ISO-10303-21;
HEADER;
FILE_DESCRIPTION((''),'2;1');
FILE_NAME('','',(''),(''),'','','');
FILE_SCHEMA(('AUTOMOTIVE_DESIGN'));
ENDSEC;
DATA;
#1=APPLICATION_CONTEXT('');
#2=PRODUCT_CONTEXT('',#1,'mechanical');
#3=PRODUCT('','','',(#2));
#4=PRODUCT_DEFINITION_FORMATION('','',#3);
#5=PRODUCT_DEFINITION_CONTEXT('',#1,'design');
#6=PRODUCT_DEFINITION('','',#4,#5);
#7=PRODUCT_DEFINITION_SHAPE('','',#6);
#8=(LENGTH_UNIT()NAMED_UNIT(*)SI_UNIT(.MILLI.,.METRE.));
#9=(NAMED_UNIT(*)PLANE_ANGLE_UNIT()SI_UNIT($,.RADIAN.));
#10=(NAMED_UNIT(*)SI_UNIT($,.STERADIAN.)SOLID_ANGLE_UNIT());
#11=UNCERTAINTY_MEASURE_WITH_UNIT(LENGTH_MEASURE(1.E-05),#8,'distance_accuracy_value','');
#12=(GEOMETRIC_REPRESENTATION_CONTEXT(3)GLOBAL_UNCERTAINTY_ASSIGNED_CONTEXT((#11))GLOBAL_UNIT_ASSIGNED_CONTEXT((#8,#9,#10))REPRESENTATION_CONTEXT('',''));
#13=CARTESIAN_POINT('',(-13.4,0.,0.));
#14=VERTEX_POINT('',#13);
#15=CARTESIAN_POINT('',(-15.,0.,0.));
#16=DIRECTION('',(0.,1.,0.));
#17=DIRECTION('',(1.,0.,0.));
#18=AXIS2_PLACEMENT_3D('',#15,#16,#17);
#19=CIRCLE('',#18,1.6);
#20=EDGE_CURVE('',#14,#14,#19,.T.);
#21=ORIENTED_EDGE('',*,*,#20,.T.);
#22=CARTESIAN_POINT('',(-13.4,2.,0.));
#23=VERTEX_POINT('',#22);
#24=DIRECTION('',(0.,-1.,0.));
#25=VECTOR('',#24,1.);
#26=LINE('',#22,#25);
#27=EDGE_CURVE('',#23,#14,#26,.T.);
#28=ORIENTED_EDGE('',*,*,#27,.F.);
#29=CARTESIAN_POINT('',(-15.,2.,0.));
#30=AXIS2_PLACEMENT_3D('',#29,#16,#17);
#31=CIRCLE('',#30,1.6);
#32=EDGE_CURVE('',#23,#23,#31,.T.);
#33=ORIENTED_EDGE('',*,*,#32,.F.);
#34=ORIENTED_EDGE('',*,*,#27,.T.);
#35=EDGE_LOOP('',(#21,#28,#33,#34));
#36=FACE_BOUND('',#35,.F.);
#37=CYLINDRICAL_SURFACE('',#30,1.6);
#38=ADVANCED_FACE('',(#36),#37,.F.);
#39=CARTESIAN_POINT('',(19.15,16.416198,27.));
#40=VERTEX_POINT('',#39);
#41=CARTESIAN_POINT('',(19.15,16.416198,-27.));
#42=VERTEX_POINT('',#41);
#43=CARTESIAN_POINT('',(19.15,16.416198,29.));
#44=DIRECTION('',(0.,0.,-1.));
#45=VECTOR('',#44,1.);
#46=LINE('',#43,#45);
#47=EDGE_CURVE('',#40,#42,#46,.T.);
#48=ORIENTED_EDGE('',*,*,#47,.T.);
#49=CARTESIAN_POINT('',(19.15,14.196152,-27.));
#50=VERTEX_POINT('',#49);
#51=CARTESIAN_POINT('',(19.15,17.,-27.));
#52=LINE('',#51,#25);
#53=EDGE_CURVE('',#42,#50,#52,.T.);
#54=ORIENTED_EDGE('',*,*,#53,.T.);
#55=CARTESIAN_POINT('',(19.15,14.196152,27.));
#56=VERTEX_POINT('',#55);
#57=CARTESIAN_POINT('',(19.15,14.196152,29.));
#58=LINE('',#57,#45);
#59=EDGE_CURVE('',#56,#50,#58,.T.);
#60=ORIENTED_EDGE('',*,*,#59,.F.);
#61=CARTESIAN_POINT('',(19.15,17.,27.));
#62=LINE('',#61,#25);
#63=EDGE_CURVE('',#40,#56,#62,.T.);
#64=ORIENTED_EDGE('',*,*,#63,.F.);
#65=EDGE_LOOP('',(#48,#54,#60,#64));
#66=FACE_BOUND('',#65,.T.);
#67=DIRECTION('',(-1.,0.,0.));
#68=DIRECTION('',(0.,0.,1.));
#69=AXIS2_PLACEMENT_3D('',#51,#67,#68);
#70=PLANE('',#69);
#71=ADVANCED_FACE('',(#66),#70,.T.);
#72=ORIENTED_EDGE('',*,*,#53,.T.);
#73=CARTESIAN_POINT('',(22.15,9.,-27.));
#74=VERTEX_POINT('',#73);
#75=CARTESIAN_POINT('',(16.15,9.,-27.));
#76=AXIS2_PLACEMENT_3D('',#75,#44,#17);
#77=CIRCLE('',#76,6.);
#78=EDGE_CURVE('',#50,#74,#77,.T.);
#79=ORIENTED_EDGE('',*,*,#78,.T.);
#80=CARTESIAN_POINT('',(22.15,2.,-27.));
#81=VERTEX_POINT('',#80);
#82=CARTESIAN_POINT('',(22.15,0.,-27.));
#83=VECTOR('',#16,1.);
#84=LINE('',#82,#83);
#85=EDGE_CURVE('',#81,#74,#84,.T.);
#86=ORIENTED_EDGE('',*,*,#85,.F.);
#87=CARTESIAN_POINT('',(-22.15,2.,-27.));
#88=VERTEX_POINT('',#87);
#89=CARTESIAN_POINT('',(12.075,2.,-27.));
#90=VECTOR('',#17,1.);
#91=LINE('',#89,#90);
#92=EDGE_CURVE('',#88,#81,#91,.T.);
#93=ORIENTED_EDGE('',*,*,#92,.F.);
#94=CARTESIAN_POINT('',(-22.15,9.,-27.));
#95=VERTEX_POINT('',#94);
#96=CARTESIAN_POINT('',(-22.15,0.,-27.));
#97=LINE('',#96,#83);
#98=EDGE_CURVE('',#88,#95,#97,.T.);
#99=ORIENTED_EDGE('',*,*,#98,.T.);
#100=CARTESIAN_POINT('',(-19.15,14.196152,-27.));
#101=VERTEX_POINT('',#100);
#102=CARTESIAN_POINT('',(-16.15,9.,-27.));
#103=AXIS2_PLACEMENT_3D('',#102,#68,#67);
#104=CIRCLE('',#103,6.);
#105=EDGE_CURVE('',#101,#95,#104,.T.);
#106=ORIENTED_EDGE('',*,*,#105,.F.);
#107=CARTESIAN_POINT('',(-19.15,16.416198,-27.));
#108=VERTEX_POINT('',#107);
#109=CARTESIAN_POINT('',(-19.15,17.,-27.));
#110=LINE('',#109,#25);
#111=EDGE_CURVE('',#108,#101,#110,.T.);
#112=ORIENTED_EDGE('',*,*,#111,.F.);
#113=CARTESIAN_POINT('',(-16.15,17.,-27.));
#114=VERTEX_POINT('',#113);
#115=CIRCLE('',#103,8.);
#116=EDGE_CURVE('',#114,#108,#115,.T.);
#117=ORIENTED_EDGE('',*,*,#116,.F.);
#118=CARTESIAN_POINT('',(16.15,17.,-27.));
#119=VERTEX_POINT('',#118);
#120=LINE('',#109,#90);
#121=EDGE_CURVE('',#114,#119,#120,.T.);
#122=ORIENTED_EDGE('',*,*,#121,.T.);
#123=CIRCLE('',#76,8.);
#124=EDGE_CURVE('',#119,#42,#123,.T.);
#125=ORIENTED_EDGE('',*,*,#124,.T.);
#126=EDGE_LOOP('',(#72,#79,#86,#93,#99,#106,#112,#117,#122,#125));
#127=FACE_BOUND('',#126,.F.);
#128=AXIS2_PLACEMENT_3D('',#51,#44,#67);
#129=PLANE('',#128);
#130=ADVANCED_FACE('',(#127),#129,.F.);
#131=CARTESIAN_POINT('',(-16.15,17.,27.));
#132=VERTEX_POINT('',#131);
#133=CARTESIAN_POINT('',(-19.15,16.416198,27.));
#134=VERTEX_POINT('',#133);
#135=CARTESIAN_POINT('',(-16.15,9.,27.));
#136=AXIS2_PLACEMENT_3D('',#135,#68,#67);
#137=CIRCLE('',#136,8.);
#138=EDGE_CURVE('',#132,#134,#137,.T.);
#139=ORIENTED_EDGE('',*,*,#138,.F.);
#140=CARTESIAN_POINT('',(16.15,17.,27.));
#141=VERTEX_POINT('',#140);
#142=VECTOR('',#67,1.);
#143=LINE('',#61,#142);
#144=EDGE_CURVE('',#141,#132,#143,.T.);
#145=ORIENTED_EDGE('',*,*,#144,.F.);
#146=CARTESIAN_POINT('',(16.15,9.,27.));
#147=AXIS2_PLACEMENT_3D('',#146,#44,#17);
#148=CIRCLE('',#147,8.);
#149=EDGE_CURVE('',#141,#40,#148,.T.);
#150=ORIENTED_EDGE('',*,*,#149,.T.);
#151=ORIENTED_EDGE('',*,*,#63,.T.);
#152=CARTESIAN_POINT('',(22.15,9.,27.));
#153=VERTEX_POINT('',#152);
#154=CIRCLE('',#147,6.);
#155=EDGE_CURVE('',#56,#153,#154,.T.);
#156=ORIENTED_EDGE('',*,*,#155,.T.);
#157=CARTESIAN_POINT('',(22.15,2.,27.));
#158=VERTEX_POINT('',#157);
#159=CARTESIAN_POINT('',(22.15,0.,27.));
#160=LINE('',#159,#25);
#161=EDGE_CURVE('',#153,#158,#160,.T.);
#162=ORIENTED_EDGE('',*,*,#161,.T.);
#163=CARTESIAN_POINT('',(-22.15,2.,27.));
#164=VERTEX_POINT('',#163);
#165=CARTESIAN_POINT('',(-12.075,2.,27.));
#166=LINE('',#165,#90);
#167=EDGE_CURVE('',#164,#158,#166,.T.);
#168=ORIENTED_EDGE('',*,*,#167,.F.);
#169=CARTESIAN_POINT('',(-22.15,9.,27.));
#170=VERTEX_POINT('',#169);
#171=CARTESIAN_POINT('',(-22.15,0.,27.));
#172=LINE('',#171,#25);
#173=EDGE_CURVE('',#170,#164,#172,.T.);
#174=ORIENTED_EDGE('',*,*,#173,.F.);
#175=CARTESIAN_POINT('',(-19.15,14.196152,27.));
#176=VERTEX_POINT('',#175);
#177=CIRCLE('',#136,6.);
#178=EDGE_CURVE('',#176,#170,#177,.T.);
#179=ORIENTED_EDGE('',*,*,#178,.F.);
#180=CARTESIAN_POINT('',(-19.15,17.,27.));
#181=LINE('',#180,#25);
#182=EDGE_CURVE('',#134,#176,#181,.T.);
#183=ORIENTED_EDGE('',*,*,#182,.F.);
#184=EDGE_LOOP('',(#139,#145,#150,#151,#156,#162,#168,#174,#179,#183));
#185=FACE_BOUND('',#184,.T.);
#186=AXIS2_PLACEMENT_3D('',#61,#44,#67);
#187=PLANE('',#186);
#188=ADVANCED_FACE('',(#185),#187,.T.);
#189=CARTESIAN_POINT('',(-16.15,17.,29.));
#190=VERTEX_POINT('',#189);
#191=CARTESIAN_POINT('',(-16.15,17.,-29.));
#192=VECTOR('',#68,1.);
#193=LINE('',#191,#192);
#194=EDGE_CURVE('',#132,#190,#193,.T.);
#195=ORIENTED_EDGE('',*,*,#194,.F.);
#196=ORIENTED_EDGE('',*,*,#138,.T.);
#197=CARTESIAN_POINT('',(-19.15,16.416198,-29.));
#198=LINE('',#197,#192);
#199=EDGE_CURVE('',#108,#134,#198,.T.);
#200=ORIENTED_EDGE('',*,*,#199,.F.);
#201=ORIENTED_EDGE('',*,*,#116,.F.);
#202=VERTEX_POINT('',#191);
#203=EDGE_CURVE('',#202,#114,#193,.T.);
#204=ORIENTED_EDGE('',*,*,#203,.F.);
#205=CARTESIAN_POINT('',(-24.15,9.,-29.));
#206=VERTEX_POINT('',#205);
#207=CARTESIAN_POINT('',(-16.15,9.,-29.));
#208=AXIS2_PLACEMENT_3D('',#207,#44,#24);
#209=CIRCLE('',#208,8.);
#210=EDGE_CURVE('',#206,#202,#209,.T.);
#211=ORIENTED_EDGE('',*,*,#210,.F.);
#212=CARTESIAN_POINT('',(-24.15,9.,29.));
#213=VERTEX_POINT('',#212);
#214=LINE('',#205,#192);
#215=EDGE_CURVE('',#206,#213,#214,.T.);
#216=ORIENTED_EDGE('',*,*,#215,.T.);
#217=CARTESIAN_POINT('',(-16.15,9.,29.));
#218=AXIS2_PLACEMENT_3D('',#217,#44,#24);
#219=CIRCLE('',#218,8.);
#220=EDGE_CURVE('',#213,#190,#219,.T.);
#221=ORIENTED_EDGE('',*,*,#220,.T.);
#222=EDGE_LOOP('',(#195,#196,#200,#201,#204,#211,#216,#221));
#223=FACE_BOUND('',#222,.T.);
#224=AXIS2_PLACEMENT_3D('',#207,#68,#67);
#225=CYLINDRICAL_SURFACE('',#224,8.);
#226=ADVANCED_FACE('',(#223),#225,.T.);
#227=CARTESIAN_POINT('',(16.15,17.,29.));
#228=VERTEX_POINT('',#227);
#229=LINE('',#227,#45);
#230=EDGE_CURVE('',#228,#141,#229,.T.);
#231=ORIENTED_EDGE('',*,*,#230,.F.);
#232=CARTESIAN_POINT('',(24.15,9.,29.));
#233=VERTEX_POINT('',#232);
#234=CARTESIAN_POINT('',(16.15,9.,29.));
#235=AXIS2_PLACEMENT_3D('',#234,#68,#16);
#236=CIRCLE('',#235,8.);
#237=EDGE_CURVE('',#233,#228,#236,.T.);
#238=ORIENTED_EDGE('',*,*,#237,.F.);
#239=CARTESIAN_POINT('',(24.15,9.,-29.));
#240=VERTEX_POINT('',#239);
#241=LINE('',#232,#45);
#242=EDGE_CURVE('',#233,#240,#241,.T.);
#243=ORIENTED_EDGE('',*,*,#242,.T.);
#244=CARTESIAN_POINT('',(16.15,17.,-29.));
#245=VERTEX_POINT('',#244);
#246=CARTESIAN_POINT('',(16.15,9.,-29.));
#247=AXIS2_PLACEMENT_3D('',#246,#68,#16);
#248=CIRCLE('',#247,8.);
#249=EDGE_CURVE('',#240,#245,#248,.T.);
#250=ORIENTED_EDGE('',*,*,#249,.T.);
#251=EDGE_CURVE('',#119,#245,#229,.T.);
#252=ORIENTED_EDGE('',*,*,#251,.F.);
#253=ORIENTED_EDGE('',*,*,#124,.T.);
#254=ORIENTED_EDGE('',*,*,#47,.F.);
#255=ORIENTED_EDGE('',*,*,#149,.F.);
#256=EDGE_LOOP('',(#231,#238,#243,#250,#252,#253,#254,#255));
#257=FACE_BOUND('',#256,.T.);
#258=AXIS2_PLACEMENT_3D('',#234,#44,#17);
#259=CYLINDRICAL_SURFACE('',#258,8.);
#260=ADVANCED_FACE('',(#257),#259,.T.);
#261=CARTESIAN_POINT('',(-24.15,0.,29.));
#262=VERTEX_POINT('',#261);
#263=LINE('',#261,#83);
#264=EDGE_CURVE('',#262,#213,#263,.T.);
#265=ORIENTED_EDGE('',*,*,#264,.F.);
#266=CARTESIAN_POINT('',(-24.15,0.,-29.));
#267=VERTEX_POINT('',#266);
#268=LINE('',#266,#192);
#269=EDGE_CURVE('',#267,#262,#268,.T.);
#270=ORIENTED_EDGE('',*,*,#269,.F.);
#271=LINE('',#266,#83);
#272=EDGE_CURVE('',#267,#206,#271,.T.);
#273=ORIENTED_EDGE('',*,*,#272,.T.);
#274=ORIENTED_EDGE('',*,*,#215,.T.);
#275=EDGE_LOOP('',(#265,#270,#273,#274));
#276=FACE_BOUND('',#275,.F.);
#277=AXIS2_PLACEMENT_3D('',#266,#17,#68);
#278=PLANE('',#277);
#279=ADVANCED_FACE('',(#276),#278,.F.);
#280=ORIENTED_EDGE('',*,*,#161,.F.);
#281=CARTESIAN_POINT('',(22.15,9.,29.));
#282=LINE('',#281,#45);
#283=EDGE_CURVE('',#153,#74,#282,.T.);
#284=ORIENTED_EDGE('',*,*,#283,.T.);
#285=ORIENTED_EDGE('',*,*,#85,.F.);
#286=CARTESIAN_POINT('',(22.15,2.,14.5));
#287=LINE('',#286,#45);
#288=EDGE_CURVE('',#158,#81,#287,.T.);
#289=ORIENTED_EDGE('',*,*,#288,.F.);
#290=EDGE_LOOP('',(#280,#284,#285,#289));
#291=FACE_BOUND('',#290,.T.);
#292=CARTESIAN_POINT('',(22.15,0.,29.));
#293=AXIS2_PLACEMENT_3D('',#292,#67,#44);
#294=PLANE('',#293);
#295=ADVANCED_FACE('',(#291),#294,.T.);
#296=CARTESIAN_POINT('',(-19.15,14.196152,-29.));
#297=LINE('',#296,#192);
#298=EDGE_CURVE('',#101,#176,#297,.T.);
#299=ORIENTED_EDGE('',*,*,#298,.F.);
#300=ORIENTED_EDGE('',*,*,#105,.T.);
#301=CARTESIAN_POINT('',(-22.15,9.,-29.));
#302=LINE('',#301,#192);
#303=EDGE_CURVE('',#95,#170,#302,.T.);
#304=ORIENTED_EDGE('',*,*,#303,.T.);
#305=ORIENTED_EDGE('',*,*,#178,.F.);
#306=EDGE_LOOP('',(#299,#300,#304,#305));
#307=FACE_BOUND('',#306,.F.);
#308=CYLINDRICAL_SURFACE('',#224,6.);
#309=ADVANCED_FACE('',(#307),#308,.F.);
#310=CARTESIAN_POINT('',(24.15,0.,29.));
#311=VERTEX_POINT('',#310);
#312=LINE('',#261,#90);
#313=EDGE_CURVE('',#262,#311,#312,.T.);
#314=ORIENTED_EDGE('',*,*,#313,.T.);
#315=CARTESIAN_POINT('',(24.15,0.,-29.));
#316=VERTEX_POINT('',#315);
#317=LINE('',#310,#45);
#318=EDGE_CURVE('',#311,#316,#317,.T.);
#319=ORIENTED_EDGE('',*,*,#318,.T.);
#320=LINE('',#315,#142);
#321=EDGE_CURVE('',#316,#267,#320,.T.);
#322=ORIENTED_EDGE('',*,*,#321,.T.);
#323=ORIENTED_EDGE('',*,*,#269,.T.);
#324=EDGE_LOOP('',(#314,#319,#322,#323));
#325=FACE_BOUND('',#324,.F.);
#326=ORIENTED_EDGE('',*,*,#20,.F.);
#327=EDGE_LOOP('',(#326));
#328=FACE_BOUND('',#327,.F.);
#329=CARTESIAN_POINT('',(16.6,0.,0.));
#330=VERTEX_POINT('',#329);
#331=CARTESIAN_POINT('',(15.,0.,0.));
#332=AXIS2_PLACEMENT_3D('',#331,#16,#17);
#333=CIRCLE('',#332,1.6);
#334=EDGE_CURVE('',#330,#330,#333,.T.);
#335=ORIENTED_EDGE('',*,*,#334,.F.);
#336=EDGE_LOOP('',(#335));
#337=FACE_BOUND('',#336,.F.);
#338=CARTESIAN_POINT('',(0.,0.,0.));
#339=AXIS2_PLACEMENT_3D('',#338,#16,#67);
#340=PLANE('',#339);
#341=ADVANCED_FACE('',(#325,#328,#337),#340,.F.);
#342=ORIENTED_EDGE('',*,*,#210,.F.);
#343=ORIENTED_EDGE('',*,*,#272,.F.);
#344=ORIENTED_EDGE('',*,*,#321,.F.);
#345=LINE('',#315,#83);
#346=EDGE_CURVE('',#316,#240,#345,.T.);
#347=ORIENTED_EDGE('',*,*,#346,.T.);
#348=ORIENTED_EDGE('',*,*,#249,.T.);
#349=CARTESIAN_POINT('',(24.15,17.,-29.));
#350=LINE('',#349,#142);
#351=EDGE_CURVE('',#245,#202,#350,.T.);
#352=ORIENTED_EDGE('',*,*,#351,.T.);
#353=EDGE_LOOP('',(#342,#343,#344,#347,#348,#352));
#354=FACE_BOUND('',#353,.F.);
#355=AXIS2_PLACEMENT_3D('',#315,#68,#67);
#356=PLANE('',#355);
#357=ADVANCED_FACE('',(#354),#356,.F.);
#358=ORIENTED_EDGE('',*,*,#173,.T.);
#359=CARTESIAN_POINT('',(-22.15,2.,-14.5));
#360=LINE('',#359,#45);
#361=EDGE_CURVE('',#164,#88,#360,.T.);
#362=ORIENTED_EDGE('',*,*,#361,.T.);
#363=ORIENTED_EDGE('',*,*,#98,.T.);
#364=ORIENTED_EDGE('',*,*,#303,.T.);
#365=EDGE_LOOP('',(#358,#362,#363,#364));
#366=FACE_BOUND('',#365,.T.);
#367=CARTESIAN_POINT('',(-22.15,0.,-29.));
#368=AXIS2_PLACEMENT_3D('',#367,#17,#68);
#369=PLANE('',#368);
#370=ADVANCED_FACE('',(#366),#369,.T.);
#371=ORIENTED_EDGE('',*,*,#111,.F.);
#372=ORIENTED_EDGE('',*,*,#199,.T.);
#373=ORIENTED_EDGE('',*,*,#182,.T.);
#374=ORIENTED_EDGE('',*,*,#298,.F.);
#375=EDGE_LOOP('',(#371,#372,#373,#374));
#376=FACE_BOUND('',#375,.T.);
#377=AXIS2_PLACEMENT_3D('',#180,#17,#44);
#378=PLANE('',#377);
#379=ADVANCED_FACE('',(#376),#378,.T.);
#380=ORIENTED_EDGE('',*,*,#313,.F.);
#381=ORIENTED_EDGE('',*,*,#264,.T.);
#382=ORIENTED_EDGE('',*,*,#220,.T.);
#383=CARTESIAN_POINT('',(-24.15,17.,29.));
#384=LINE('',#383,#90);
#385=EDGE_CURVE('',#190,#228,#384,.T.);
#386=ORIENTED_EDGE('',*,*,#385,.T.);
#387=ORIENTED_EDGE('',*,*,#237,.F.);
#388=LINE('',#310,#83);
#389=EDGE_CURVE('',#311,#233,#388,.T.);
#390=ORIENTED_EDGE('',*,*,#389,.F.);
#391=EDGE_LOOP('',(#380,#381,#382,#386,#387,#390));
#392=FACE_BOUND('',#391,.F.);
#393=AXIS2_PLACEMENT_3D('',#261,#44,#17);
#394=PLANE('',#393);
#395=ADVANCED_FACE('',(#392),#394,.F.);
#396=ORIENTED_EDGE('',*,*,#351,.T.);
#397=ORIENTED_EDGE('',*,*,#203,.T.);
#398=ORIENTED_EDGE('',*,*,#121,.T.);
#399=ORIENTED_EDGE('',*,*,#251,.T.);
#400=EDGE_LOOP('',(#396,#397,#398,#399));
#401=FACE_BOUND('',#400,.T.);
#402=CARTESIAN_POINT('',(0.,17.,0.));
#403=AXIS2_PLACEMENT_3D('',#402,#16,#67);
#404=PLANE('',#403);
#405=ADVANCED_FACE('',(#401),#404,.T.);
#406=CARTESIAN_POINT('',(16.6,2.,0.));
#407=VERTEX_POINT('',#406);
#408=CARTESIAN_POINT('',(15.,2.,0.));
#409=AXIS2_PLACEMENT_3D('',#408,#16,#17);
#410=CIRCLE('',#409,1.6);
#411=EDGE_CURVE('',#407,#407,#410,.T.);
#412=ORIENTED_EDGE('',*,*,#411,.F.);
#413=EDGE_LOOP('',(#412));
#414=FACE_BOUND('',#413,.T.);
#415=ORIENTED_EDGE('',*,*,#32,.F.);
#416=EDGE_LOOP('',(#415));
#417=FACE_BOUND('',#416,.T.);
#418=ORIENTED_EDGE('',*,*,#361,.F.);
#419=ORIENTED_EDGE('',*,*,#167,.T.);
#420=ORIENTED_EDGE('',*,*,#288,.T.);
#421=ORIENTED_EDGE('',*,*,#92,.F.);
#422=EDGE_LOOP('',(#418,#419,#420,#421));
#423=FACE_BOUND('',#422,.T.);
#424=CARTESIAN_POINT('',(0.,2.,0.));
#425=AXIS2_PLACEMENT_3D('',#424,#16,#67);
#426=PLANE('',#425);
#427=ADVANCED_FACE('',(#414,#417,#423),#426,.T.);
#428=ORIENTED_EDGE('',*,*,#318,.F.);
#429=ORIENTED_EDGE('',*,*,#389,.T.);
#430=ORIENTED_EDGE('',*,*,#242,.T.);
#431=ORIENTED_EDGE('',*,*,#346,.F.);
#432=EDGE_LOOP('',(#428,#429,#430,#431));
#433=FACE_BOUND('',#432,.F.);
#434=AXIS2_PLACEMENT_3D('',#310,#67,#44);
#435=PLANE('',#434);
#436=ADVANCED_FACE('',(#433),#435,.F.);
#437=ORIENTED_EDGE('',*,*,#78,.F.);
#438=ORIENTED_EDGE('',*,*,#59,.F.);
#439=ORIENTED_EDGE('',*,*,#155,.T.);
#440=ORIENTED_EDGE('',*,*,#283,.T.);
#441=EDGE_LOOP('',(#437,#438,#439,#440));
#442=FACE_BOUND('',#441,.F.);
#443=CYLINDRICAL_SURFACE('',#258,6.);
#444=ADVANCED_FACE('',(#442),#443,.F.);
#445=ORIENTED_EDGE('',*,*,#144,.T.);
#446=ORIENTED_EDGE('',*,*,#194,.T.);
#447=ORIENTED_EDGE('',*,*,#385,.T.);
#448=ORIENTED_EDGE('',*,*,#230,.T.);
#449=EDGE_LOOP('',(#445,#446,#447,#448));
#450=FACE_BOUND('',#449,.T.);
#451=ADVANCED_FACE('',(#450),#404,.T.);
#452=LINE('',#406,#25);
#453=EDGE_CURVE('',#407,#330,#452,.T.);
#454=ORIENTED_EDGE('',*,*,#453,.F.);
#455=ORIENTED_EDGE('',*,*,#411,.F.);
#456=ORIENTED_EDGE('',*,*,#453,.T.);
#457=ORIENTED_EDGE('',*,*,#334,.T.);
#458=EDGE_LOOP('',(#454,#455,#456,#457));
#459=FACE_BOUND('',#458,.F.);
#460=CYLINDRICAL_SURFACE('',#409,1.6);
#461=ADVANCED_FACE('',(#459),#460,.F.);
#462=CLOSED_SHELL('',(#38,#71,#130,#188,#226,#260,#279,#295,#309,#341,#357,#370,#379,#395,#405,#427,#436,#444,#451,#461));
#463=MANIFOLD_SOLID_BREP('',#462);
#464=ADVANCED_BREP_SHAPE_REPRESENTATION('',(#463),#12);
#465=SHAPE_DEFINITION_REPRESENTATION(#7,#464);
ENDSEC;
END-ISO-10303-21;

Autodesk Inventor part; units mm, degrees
ref_plane "YZ Plane" through (0, 0, 0) normal (1, 0, 0) x (0, 1, 0)
ref_plane "XZ Plane" through (0, 0, 0) normal (0, 1, 0) x (-1, 0, 0)
ref_plane "XY Plane" through (0, 0, 0) normal (0, 0, 1) x (1, 0, 0)
sketch "スケッチ1" plane through (0, 0, 0) normal (0, 1, 0) x (-1, 0, 0)
  line L0 (-24.15, -29) -> (24.15, -29)
  line L1 (24.15, -29) -> (24.15, 29)
  line L2 (24.15, 29) -> (-24.15, 29)
  line L3 (-24.15, 29) -> (-24.15, -29)
  line L4 (-24.15, -29) -> (24.15, 29) construction
  line L5 (24.15, -29) -> (-24.15, 29) construction
  point P0 (0, 0)
  dimension "d0" = 48.3
  dimension "d1" = 58
extrude "押し出し1" add sketch "スケッチ1" along normal blind 17
fillet "フィレット1" radius 8 2 edges at (24.15, 17, 0) (-24.15, 17, 0)
shell "シェル1" thickness 2 removed faces 0
sketch "スケッチ2" plane through (0, 17, 0) normal (0, 1, 0) x (1, 0, 0)
  line L0 (22.15, 27) -> (-22.15, 27) projected
  line L1 (19.15, -27) -> (-19.15, -27)
  line L2 (-19.15, -27) -> (-19.15, 27)
  line L3 (-19.15, 27) -> (19.15, 27)
  line L4 (19.15, 27) -> (19.15, -27)
  line L5 (19.15, -27) -> (-19.15, 27) construction
  line L6 (-19.15, -27) -> (19.15, 27) construction
  line L7 (-16.15, -29) -> (-16.15, 29) projected
  point P0 (0, 0)
  dimension "d8" = 3
extrude "押し出し2" cut sketch "スケッチ2" against normal blind 5
sketch "スケッチ3" plane through (-22.15, 2, 27) normal (0, 1, 0) x (1, 0, 0)
  circle A0 centre (37.15, 27) radius 1.6
  circle A1 centre (7.15, 27) radius 1.6
  line L0 (6, 54) -> (38.3, 54) projected
  line L1 (22.15, 54) -> (22.15, 0) construction
  line L2 (0, 0) -> (44.3, 0) projected
  point P0 (22.15, 27)
  dimension "d9" = 3.2
  dimension "d11" = 30
extrude "押し出し3" cut sketch "スケッチ3" against normal through all
properties part number "battery_box"
